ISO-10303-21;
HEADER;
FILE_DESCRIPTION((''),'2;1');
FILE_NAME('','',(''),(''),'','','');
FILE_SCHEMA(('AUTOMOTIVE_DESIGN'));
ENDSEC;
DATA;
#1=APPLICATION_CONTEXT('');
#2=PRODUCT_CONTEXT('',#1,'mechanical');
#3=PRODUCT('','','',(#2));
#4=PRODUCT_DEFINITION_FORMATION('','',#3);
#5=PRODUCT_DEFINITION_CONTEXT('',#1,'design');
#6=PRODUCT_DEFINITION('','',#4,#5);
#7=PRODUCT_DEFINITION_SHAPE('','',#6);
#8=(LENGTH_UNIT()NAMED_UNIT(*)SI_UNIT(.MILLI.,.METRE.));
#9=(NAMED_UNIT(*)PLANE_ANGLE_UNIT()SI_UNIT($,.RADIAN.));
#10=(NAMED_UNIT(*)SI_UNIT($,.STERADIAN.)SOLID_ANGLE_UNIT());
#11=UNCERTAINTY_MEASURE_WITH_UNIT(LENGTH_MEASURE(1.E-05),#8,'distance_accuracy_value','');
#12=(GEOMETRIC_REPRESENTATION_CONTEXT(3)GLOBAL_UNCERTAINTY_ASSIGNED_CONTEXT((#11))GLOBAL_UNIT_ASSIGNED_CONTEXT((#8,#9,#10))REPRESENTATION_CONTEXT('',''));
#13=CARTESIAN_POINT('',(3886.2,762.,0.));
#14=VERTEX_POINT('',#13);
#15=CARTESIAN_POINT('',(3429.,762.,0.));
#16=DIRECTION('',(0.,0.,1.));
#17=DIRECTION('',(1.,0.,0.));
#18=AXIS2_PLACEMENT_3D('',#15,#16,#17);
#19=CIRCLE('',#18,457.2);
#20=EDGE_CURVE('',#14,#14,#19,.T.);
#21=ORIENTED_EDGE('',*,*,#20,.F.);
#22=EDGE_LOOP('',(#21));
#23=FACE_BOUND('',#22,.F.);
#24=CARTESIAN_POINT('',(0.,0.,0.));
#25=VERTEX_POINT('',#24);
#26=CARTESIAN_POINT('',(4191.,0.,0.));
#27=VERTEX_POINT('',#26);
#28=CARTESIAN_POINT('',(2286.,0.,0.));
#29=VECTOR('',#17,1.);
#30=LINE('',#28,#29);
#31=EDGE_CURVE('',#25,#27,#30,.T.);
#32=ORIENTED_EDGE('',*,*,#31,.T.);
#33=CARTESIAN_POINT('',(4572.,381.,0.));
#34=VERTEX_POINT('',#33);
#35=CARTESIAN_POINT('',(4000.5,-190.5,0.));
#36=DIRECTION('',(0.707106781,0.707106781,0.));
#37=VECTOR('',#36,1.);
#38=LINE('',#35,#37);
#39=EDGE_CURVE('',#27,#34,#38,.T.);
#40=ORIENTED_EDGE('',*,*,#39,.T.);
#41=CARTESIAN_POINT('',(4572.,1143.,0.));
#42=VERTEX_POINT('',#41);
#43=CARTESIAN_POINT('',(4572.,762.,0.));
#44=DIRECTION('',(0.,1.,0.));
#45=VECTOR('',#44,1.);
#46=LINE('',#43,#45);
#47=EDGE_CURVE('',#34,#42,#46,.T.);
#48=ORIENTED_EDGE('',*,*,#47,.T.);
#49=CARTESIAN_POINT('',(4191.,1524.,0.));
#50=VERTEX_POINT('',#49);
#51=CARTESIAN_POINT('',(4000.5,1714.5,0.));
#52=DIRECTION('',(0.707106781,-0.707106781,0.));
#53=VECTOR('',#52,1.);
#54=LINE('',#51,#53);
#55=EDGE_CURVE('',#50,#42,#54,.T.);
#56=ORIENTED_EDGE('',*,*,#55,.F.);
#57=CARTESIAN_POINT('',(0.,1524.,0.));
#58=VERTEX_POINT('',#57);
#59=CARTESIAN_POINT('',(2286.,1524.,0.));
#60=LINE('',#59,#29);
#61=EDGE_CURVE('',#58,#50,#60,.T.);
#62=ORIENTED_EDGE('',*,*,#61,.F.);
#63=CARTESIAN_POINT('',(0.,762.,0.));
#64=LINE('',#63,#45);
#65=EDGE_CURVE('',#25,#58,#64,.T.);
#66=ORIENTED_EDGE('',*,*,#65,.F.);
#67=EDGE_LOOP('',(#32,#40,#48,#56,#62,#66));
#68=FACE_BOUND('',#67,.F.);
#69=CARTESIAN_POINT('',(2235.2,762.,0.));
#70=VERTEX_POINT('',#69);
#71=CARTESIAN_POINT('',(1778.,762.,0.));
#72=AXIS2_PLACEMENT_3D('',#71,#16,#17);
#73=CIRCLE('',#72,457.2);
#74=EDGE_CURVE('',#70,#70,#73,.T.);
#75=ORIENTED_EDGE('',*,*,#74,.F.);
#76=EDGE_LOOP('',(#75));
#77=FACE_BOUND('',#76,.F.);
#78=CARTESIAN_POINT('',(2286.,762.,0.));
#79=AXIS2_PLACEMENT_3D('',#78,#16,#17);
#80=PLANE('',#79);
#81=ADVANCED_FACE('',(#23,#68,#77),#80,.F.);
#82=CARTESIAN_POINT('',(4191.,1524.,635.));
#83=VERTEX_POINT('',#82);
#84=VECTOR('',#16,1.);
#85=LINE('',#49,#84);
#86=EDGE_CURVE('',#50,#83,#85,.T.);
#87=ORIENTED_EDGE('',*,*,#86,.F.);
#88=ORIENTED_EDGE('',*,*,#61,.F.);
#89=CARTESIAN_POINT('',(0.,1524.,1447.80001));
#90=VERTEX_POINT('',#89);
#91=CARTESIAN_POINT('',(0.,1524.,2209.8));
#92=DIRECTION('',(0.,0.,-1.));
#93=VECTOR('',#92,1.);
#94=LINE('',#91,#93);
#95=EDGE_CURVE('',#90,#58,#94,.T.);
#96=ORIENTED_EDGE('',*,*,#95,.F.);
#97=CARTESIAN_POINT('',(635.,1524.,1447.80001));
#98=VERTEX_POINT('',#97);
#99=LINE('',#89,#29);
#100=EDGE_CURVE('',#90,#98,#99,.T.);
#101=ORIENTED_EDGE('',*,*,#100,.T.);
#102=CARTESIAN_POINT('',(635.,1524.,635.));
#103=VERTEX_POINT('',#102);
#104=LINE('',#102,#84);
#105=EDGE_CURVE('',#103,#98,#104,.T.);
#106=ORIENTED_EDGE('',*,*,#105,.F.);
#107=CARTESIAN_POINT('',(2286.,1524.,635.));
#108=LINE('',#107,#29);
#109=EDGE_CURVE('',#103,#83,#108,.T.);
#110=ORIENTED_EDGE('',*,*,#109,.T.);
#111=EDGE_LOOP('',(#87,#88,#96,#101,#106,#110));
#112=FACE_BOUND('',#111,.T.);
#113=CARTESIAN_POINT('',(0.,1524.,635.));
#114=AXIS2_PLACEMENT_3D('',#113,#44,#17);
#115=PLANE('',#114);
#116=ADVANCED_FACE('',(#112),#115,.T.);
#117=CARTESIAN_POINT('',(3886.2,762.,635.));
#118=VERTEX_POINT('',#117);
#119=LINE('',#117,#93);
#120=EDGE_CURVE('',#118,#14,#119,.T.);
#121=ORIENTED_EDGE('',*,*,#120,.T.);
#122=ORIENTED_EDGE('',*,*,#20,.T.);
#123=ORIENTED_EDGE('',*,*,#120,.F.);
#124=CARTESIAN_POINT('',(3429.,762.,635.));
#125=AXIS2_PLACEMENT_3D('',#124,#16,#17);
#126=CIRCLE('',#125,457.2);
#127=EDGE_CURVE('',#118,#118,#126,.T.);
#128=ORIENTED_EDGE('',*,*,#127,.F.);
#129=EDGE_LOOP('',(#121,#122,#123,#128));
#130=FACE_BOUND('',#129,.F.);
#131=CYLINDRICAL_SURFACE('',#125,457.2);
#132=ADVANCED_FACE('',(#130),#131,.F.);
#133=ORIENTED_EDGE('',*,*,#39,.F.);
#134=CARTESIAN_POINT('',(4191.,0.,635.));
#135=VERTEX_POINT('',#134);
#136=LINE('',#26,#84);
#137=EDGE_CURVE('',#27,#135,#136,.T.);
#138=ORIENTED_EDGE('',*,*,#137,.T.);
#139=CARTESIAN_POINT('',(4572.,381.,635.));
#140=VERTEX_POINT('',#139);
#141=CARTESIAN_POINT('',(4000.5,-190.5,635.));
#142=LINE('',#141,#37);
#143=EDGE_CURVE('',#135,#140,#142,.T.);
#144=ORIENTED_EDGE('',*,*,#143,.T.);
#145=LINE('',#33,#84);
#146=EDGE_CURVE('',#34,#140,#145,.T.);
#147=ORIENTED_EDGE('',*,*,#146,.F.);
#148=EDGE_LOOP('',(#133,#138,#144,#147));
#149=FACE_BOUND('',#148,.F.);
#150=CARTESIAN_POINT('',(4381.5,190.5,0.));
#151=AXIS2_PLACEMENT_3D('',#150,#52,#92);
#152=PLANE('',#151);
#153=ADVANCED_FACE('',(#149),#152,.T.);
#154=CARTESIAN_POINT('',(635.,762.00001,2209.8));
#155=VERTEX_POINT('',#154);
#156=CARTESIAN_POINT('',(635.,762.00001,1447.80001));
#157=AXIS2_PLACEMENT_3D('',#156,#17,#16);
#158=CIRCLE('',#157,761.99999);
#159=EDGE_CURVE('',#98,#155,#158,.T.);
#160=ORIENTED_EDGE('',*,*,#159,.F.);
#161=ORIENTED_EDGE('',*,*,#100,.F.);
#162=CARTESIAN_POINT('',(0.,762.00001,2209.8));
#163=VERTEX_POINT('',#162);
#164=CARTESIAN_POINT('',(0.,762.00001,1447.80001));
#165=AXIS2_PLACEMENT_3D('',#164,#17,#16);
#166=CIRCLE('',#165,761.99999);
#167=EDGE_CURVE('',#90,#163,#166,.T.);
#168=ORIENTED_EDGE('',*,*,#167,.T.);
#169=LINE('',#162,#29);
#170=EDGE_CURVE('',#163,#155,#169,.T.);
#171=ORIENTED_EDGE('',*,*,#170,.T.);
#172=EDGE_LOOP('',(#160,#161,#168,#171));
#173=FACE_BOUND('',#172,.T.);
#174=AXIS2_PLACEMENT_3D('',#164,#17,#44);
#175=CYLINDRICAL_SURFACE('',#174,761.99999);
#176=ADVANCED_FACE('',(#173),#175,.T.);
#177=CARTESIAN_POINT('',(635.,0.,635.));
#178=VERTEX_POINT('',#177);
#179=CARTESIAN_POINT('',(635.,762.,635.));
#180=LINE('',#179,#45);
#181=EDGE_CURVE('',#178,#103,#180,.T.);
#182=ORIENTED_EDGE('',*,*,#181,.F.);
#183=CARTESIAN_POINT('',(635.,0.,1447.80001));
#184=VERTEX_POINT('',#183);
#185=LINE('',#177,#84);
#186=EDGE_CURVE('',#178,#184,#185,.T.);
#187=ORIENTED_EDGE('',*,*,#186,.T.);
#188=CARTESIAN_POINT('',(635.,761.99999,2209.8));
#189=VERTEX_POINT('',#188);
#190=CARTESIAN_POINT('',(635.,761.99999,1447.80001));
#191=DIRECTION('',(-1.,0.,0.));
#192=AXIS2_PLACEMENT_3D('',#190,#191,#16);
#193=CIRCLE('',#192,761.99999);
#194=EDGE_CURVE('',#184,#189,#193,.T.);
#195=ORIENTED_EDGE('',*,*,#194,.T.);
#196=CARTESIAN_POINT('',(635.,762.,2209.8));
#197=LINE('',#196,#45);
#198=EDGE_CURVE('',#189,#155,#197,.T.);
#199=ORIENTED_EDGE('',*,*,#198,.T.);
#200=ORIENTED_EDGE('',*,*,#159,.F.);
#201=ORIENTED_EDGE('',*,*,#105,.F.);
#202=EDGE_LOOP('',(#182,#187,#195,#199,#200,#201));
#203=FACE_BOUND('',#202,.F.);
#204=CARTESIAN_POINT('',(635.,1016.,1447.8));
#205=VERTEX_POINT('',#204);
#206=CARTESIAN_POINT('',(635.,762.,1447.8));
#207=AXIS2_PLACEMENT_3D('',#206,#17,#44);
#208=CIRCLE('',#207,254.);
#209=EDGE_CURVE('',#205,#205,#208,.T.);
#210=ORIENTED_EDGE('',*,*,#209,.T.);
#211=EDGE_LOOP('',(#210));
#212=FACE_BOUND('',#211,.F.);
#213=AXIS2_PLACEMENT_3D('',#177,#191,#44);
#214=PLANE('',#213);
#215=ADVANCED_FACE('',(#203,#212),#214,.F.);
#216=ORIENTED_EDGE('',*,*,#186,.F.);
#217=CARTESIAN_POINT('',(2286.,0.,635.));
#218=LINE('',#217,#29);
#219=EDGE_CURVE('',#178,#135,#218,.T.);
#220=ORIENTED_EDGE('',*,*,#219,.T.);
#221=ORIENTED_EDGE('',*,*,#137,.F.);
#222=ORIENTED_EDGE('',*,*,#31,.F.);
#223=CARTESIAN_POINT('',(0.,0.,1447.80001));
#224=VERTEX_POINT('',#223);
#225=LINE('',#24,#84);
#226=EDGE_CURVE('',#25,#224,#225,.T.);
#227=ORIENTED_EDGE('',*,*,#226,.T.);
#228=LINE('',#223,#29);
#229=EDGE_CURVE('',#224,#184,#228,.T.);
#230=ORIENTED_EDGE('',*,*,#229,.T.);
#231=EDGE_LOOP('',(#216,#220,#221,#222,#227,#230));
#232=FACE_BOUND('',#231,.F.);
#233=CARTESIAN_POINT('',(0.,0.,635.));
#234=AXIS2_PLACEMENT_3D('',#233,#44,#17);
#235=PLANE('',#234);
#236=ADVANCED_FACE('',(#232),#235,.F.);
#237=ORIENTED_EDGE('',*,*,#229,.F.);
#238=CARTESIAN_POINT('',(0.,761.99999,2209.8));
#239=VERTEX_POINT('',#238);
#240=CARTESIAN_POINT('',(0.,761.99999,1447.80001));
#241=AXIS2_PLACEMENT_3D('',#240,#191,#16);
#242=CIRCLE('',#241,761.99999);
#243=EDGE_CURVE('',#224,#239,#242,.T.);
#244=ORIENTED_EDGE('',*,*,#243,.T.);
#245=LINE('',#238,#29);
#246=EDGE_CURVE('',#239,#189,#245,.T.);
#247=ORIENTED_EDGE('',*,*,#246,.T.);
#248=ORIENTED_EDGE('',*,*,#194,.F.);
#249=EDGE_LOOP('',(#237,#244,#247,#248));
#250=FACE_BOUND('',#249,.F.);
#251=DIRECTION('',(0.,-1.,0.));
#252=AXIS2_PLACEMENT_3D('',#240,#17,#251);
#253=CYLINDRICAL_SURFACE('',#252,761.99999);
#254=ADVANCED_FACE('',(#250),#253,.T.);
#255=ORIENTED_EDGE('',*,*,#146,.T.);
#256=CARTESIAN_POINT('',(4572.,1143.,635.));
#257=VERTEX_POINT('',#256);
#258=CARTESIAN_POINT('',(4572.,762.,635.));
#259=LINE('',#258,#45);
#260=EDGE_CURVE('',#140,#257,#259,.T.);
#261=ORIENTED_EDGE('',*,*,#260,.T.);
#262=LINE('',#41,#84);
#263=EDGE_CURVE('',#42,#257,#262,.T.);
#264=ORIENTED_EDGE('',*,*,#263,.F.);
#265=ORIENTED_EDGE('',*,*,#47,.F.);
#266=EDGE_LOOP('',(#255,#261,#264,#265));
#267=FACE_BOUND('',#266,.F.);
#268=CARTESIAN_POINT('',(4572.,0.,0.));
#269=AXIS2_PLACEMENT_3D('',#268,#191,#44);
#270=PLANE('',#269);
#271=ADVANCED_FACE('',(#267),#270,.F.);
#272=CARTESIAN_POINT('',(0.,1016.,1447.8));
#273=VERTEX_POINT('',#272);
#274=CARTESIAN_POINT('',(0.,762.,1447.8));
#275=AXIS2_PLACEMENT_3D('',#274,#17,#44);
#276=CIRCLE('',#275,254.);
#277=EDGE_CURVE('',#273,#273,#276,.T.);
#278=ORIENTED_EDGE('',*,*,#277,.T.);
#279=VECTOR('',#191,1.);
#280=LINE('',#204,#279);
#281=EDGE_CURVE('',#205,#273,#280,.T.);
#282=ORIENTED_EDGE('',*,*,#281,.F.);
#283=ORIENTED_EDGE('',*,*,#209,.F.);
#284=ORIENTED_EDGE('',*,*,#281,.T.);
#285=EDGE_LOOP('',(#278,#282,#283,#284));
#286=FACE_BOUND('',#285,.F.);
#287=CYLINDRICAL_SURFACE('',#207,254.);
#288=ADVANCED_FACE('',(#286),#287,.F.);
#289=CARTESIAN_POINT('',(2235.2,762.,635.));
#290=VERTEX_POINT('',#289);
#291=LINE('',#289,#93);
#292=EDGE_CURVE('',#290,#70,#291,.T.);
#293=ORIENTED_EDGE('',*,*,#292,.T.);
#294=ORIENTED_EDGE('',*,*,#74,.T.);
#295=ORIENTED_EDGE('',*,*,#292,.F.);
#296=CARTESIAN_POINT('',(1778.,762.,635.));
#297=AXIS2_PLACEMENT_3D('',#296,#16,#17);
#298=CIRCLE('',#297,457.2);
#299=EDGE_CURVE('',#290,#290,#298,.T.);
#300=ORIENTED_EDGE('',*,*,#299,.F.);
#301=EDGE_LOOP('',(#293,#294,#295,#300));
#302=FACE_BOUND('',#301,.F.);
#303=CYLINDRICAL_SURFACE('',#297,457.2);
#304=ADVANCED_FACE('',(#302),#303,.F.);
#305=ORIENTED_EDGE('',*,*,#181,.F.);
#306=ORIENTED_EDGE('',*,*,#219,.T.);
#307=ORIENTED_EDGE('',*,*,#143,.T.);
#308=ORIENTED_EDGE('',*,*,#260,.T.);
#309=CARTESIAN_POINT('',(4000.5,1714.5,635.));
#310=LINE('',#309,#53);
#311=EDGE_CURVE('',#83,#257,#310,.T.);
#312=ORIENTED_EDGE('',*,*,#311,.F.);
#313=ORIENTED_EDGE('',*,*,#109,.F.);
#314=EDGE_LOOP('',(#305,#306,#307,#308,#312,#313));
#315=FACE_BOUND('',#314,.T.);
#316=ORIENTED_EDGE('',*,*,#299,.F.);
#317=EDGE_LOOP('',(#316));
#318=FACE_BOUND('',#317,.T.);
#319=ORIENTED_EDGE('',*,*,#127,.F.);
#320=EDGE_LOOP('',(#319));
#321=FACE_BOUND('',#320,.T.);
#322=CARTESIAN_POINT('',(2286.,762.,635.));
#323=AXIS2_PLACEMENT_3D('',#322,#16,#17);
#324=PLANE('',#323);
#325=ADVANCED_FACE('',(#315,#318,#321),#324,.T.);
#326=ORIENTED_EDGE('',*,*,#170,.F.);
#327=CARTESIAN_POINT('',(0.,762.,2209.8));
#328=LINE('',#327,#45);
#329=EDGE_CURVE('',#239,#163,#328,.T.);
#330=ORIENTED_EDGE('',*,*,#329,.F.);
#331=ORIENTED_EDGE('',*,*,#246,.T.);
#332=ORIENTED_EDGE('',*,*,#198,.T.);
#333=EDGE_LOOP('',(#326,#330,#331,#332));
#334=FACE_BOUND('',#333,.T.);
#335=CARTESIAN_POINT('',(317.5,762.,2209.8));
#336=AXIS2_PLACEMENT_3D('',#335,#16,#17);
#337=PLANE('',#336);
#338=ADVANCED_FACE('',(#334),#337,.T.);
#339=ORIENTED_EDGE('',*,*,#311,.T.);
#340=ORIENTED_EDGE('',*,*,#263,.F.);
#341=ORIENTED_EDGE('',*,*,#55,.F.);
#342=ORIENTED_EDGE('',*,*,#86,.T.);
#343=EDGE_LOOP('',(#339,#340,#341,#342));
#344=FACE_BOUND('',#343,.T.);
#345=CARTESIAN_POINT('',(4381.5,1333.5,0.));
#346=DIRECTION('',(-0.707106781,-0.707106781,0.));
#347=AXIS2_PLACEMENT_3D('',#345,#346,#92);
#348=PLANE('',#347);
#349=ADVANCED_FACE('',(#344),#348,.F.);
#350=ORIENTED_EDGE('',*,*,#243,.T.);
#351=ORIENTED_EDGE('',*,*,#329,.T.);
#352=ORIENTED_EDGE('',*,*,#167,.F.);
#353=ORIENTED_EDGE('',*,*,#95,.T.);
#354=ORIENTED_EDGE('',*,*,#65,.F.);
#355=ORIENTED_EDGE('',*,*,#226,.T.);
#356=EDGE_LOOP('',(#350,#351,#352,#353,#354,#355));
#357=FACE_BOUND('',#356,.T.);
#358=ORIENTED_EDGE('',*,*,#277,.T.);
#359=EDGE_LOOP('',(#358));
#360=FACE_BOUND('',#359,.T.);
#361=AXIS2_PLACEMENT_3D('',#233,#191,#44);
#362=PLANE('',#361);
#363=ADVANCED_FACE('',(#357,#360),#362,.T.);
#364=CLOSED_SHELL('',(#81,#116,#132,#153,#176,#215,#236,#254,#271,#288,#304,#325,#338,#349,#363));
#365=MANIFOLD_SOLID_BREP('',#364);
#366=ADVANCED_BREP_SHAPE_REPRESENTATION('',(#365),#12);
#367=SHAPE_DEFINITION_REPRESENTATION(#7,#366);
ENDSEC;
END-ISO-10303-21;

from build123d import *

# Parameters (mm, degrees)
F0_W     = 4572
F0_H     = 1524
F1_DEPTH = 635
F2_W     = 635
F2_H     = 1524
F3_DEPTH = 1574.8
F4_R     = 761.99999
F5_R     = 457.2
F6_DEPTH = 2540
F7_R     = 254
F8_DEPTH = 635
F9_SIZE  = 381


# Not quite as in the source:
# - a fillet or chamfer is up to 0.001 mm smaller than in the source, because OpenCascade refuses the exact size


with BuildPart() as f1:
    # F0 (on Top) → F1 (new body)
    with BuildSketch(Plane.XY):
        with Locations((2286, 762)):
            Rectangle(F0_W, F0_H)
    extrude(amount=F1_DEPTH)

    # F2 (on face) → F3 (join)
    with BuildSketch(Plane.XY.offset(635)):
        with Locations((317.5, 762)):
            Rectangle(F2_W, F2_H)
    extrude(amount=F3_DEPTH)

    # F4 (radius 762 in the source; OpenCascade refuses exactly that, so slightly less here)
    f4_edges = [f1.edges().sort_by_distance(p)[0] for p in [
        (317.5, 0, 2209.8),
        (317.5, 1524, 2209.8),
    ]]
    fillet(f4_edges, radius=F4_R)

    # F5 (on face) → F6 (cut)
    with BuildSketch(Plane.XY.offset(635)):
        with Locations((1778, 762)):
            Circle(F5_R)
        with Locations((3429, 762)):
            Circle(F5_R)
    extrude(amount=-F6_DEPTH, mode=Mode.SUBTRACT)

    # F7 (on face) → F8 (cut, through all)
    with BuildSketch(Plane.YZ.offset(635)):
        with Locations((762, 1447.8)):
            Circle(F7_R)
    extrude(amount=-F8_DEPTH, mode=Mode.SUBTRACT)

    # F9
    f9_edges = [f1.edges().sort_by_distance(p)[0] for p in [
        (4572, 0, 317.5),
        (4572, 1524, 317.5),
    ]]
    chamfer(f9_edges, length=F9_SIZE)


solid = f1.part
